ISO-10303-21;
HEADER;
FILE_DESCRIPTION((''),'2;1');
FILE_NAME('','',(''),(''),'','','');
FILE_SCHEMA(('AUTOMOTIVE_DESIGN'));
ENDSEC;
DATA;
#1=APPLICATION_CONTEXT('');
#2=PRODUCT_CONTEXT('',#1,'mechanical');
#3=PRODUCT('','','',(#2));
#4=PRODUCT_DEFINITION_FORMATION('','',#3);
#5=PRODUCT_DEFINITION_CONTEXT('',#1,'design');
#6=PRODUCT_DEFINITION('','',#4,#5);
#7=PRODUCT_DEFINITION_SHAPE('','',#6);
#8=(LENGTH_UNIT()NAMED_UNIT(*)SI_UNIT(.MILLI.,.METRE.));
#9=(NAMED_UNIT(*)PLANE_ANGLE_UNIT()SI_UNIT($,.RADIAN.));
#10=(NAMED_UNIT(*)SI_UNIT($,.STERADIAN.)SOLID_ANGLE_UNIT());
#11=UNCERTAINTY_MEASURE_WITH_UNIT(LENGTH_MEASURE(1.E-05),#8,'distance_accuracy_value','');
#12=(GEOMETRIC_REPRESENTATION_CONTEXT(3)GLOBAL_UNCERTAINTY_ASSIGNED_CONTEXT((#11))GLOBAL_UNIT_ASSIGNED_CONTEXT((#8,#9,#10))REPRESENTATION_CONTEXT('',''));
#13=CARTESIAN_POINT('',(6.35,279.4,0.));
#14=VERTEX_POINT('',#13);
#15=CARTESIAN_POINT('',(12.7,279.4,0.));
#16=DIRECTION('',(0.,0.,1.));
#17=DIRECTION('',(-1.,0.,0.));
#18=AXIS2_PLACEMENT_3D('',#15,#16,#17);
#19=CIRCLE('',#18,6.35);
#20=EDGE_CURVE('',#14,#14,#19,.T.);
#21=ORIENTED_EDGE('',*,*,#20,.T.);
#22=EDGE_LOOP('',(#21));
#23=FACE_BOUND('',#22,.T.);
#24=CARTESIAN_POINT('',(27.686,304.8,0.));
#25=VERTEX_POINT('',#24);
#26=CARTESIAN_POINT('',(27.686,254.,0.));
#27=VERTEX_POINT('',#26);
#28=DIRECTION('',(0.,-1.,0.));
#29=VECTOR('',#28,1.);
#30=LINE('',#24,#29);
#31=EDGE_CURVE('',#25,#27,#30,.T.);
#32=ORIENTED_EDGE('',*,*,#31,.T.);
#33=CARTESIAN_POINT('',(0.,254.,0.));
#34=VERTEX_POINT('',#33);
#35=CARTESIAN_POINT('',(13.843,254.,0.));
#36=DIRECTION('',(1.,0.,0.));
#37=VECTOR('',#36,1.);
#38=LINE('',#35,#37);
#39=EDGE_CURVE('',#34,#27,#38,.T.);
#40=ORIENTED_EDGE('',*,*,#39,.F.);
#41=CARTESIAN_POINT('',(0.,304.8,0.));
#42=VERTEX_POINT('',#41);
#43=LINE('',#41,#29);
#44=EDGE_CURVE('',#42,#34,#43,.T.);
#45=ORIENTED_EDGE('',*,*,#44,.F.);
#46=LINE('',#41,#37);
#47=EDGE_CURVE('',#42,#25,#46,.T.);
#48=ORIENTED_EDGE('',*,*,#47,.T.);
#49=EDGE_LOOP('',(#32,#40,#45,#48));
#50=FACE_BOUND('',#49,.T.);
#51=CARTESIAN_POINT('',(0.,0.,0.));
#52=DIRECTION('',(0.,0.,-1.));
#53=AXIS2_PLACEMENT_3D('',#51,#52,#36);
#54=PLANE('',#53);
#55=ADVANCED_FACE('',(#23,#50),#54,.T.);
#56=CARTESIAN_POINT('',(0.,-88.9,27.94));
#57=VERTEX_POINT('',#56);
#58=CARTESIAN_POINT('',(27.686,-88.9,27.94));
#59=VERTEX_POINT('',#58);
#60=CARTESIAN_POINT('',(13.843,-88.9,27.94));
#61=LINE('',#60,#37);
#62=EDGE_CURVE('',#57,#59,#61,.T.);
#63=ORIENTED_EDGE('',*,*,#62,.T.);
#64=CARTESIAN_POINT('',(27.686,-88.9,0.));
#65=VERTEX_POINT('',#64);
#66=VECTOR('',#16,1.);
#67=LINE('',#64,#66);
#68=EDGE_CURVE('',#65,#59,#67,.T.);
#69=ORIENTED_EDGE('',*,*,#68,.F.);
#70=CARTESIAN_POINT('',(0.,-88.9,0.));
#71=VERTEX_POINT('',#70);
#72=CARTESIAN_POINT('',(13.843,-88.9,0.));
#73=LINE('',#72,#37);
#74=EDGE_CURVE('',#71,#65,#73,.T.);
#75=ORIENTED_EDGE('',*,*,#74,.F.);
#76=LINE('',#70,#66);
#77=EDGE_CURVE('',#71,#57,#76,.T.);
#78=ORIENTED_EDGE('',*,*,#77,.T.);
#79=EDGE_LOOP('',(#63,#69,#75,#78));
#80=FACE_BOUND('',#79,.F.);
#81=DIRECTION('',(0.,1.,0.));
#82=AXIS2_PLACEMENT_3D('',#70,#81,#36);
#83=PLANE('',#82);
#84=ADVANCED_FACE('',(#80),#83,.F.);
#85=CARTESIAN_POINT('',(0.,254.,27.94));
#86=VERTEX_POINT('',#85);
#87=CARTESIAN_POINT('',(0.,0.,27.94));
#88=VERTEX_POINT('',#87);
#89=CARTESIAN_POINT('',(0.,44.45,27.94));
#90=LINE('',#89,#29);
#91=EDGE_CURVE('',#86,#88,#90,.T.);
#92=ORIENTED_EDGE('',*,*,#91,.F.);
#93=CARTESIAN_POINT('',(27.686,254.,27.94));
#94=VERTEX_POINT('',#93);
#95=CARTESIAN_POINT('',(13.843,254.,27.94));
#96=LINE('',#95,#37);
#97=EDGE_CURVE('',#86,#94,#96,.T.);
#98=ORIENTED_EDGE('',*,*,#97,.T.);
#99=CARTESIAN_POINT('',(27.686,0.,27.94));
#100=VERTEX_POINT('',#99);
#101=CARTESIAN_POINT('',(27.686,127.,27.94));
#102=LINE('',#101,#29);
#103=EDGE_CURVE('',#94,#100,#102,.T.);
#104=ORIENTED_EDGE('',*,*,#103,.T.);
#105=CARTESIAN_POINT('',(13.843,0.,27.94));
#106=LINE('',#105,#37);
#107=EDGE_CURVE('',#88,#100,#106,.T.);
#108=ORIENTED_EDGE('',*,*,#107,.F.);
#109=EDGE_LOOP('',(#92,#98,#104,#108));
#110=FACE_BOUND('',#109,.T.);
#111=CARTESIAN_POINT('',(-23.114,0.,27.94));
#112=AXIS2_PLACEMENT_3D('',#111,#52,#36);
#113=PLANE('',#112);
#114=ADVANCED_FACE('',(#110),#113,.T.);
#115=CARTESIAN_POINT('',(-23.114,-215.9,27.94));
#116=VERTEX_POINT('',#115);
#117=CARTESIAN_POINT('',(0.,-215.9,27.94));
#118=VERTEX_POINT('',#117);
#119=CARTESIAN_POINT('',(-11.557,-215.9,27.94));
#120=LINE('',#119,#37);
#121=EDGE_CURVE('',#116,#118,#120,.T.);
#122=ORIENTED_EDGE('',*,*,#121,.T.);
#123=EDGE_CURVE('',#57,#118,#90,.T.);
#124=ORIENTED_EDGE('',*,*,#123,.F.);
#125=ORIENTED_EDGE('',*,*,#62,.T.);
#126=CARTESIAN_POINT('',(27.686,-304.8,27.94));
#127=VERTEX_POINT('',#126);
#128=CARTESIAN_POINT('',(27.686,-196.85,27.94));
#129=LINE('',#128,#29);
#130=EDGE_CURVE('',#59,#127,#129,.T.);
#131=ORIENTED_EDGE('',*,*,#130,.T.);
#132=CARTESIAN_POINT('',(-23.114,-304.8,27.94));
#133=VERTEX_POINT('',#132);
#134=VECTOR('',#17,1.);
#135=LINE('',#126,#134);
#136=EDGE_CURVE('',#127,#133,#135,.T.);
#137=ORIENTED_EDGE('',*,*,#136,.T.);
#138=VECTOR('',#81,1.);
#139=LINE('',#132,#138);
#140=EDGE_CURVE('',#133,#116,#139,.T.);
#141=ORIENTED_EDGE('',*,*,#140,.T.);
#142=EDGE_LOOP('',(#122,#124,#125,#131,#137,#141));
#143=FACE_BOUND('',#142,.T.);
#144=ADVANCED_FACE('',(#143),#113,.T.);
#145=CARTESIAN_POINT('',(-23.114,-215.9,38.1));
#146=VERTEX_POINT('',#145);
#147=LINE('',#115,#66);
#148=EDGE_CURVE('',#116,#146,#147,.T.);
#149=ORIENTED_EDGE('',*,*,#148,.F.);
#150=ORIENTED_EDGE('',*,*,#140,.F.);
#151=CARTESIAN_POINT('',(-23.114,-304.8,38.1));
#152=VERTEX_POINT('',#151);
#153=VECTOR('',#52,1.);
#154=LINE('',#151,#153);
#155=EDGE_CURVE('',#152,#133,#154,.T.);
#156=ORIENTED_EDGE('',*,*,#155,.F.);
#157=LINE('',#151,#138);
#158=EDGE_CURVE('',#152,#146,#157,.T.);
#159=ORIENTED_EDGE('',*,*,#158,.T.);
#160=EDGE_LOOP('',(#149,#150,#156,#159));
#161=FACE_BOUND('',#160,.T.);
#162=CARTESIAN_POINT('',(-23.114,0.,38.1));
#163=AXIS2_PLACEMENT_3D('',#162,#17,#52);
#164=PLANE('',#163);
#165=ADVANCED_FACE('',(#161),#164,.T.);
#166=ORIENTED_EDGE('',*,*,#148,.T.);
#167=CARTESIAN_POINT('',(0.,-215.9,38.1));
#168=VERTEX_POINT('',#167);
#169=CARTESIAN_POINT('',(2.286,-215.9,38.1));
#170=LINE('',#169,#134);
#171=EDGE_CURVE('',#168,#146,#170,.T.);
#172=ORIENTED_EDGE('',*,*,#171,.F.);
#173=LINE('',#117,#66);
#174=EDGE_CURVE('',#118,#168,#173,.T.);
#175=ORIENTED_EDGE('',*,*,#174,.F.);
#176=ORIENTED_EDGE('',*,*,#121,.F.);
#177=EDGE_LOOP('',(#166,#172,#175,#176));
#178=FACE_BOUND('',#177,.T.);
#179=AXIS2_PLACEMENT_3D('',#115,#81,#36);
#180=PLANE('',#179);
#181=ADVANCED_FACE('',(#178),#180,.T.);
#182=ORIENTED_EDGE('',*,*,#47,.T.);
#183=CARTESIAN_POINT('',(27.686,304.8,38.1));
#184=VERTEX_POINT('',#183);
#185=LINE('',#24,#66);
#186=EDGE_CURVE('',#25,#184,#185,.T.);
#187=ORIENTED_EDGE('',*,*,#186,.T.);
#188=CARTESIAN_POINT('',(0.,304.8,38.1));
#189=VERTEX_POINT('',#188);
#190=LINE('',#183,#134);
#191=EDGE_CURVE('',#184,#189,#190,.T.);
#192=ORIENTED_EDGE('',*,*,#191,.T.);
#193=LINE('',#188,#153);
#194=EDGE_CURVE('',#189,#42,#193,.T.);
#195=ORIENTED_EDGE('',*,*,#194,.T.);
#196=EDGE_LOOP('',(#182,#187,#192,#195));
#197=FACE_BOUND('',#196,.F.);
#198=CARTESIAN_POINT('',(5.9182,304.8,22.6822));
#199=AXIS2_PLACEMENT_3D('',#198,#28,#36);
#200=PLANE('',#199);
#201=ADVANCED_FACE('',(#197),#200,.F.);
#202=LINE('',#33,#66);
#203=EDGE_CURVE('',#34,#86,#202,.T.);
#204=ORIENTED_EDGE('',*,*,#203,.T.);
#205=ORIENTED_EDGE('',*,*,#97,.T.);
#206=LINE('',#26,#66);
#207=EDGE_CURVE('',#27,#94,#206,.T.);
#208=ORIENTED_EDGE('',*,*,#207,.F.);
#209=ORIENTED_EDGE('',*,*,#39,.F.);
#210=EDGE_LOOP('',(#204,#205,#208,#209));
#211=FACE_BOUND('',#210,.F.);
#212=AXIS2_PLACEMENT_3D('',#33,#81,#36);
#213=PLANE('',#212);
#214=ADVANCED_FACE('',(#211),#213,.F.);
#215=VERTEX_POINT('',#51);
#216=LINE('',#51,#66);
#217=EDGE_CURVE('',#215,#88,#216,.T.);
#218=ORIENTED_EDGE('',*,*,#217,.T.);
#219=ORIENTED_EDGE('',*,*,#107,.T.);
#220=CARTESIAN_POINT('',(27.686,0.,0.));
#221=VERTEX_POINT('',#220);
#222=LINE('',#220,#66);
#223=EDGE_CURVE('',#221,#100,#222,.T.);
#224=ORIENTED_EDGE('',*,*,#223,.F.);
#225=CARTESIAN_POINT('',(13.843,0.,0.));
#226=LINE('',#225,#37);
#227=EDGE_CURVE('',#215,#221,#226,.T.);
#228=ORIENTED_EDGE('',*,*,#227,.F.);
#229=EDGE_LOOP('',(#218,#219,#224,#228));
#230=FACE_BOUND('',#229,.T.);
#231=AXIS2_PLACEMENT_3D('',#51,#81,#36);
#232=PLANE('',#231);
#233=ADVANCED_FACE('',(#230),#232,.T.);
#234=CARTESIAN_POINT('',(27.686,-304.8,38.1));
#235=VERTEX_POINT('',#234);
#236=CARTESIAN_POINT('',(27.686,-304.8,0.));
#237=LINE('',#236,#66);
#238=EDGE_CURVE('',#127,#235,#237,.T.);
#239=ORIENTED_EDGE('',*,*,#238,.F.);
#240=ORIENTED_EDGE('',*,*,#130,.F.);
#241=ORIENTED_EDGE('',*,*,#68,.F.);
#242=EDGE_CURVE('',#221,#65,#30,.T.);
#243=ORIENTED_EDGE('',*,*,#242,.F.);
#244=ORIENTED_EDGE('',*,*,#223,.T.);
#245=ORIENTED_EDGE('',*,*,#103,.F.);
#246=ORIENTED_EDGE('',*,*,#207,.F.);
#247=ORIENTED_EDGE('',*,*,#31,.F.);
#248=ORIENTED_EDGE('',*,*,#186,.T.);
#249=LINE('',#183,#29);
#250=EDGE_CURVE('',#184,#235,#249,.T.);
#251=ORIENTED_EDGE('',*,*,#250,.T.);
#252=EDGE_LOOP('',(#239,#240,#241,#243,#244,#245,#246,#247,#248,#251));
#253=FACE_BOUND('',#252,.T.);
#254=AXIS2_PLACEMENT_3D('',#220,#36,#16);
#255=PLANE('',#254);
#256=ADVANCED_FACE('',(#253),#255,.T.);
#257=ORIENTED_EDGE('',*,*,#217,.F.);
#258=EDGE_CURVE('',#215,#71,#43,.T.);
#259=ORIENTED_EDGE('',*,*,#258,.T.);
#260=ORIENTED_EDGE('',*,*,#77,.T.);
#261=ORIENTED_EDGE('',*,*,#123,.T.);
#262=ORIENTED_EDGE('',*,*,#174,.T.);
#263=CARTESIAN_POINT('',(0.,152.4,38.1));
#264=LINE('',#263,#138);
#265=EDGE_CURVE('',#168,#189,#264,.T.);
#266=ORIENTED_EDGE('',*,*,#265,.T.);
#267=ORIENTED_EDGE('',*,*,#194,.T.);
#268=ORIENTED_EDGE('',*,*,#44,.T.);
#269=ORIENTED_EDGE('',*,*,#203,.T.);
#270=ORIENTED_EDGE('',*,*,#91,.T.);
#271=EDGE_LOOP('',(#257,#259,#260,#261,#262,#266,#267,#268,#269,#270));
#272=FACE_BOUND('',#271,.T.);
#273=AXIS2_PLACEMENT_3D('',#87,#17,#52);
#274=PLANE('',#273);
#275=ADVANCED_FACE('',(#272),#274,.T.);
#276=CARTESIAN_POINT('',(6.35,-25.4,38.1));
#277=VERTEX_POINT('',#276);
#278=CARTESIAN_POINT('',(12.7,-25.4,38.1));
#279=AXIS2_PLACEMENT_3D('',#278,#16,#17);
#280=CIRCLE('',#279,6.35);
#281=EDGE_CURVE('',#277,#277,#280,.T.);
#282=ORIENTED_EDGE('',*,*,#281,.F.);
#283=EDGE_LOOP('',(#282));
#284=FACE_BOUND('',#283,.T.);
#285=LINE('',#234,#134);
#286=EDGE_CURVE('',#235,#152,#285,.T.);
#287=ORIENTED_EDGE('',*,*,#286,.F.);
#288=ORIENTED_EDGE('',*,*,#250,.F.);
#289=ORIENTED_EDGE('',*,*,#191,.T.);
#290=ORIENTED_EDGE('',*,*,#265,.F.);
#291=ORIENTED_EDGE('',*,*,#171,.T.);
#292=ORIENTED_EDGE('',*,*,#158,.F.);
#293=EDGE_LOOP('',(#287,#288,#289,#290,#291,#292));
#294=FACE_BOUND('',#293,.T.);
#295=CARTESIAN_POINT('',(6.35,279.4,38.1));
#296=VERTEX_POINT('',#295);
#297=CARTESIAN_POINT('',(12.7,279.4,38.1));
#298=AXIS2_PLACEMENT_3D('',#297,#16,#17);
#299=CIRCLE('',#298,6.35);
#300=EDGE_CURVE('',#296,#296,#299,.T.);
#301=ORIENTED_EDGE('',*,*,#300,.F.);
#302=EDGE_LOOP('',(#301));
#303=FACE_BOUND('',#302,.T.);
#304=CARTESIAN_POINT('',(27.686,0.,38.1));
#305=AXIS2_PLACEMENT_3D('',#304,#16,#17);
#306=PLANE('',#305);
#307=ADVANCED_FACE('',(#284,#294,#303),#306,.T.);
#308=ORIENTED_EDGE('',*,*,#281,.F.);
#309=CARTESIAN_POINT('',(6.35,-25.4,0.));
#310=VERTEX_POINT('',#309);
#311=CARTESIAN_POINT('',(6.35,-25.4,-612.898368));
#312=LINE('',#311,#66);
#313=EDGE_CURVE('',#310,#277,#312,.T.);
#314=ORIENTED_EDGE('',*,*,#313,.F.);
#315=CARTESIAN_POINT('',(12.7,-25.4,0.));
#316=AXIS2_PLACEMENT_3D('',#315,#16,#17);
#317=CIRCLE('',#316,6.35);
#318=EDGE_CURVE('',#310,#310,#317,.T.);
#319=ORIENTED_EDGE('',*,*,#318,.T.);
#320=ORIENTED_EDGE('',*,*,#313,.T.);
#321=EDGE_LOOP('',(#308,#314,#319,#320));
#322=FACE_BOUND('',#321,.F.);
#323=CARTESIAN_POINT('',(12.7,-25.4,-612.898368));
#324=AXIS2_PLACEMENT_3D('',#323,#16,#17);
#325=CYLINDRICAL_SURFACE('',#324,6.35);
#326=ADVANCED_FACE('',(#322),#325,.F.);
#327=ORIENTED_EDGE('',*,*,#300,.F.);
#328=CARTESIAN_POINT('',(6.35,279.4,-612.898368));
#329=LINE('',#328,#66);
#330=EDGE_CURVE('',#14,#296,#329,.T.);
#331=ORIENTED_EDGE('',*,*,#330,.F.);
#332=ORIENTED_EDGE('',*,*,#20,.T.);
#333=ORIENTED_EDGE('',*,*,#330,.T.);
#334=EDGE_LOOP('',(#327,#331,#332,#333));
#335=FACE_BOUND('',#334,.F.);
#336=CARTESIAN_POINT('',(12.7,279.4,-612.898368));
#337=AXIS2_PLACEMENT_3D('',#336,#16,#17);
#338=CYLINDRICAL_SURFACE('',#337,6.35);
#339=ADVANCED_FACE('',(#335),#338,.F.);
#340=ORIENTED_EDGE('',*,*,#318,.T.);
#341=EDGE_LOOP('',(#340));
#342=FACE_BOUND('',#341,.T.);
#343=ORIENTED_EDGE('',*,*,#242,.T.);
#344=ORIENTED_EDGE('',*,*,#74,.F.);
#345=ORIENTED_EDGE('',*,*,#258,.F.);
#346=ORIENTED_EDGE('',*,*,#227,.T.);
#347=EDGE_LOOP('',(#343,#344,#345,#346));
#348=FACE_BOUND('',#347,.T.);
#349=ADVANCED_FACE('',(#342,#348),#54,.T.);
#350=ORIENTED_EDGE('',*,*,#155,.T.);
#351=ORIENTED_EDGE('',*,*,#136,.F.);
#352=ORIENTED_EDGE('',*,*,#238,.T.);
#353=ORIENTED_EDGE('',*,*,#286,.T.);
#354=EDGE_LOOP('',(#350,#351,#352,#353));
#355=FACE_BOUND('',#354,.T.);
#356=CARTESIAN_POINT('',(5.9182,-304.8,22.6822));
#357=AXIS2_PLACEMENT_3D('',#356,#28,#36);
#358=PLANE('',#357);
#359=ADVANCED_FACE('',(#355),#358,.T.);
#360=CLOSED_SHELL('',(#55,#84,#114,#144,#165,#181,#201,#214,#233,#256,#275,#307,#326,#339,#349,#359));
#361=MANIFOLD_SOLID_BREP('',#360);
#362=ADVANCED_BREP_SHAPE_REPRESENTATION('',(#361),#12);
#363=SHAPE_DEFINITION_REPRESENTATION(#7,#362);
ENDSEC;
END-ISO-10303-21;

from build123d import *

# Parameters (mm, degrees)
F1_DEPTH = 304.8
F3_D     = 12.7
F4_W     = 27.686
F4_H     = 215.9
F4_H_2   = 254
F5_DEPTH = 27.94
F6_W     = 23.114
F6_H     = 520.7
F7_DEPTH = 10.161


# Not quite as in the source:
# - a length typed as a fraction of an inch, garbled in the dataset ("3 / 203.2 mm" for 3/8 in), is restored


with BuildPart() as f1:
    # F0 (on Front) → F1 (new body, symmetric)
    with BuildSketch(Plane.XZ):
        Polygon((0, 27.94), (0, 0), (27.686, 0), (27.686, 38.1), (-23.114, 38.1), (-23.114, 27.94), align=None)
    extrude(amount=F1_DEPTH, both=True)

    # F3 (through all)
    with Locations(Plane(origin=(0, 0, 0), x_dir=(1, 0, 0), z_dir=(0, 0, -1))):
        with Locations((12.7, 25.4), (12.7, -279.4)):
            Hole(F3_D / 2)

    # F4 (on face) → F5 (cut, through all)
    with BuildSketch(Plane(origin=(0, 0, 0), x_dir=(1, 0, 0), z_dir=(0, 0, -1))):
        with Locations((13.843, 196.85)):
            Rectangle(F4_W, F4_H)
        with Locations((13.843, -127)):
            Rectangle(F4_W, F4_H_2)
    extrude(amount=-F5_DEPTH, mode=Mode.SUBTRACT)

    # F6 (on face) → F7 (cut, through all)
    with BuildSketch(Plane(origin=(0, 0, 27.94), x_dir=(1, 0, 0), z_dir=(0, 0, -1))):
        with Locations((-11.557, -44.45)):
            Rectangle(F6_W, F6_H)
    extrude(amount=-F7_DEPTH, mode=Mode.SUBTRACT)


solid = f1.part
